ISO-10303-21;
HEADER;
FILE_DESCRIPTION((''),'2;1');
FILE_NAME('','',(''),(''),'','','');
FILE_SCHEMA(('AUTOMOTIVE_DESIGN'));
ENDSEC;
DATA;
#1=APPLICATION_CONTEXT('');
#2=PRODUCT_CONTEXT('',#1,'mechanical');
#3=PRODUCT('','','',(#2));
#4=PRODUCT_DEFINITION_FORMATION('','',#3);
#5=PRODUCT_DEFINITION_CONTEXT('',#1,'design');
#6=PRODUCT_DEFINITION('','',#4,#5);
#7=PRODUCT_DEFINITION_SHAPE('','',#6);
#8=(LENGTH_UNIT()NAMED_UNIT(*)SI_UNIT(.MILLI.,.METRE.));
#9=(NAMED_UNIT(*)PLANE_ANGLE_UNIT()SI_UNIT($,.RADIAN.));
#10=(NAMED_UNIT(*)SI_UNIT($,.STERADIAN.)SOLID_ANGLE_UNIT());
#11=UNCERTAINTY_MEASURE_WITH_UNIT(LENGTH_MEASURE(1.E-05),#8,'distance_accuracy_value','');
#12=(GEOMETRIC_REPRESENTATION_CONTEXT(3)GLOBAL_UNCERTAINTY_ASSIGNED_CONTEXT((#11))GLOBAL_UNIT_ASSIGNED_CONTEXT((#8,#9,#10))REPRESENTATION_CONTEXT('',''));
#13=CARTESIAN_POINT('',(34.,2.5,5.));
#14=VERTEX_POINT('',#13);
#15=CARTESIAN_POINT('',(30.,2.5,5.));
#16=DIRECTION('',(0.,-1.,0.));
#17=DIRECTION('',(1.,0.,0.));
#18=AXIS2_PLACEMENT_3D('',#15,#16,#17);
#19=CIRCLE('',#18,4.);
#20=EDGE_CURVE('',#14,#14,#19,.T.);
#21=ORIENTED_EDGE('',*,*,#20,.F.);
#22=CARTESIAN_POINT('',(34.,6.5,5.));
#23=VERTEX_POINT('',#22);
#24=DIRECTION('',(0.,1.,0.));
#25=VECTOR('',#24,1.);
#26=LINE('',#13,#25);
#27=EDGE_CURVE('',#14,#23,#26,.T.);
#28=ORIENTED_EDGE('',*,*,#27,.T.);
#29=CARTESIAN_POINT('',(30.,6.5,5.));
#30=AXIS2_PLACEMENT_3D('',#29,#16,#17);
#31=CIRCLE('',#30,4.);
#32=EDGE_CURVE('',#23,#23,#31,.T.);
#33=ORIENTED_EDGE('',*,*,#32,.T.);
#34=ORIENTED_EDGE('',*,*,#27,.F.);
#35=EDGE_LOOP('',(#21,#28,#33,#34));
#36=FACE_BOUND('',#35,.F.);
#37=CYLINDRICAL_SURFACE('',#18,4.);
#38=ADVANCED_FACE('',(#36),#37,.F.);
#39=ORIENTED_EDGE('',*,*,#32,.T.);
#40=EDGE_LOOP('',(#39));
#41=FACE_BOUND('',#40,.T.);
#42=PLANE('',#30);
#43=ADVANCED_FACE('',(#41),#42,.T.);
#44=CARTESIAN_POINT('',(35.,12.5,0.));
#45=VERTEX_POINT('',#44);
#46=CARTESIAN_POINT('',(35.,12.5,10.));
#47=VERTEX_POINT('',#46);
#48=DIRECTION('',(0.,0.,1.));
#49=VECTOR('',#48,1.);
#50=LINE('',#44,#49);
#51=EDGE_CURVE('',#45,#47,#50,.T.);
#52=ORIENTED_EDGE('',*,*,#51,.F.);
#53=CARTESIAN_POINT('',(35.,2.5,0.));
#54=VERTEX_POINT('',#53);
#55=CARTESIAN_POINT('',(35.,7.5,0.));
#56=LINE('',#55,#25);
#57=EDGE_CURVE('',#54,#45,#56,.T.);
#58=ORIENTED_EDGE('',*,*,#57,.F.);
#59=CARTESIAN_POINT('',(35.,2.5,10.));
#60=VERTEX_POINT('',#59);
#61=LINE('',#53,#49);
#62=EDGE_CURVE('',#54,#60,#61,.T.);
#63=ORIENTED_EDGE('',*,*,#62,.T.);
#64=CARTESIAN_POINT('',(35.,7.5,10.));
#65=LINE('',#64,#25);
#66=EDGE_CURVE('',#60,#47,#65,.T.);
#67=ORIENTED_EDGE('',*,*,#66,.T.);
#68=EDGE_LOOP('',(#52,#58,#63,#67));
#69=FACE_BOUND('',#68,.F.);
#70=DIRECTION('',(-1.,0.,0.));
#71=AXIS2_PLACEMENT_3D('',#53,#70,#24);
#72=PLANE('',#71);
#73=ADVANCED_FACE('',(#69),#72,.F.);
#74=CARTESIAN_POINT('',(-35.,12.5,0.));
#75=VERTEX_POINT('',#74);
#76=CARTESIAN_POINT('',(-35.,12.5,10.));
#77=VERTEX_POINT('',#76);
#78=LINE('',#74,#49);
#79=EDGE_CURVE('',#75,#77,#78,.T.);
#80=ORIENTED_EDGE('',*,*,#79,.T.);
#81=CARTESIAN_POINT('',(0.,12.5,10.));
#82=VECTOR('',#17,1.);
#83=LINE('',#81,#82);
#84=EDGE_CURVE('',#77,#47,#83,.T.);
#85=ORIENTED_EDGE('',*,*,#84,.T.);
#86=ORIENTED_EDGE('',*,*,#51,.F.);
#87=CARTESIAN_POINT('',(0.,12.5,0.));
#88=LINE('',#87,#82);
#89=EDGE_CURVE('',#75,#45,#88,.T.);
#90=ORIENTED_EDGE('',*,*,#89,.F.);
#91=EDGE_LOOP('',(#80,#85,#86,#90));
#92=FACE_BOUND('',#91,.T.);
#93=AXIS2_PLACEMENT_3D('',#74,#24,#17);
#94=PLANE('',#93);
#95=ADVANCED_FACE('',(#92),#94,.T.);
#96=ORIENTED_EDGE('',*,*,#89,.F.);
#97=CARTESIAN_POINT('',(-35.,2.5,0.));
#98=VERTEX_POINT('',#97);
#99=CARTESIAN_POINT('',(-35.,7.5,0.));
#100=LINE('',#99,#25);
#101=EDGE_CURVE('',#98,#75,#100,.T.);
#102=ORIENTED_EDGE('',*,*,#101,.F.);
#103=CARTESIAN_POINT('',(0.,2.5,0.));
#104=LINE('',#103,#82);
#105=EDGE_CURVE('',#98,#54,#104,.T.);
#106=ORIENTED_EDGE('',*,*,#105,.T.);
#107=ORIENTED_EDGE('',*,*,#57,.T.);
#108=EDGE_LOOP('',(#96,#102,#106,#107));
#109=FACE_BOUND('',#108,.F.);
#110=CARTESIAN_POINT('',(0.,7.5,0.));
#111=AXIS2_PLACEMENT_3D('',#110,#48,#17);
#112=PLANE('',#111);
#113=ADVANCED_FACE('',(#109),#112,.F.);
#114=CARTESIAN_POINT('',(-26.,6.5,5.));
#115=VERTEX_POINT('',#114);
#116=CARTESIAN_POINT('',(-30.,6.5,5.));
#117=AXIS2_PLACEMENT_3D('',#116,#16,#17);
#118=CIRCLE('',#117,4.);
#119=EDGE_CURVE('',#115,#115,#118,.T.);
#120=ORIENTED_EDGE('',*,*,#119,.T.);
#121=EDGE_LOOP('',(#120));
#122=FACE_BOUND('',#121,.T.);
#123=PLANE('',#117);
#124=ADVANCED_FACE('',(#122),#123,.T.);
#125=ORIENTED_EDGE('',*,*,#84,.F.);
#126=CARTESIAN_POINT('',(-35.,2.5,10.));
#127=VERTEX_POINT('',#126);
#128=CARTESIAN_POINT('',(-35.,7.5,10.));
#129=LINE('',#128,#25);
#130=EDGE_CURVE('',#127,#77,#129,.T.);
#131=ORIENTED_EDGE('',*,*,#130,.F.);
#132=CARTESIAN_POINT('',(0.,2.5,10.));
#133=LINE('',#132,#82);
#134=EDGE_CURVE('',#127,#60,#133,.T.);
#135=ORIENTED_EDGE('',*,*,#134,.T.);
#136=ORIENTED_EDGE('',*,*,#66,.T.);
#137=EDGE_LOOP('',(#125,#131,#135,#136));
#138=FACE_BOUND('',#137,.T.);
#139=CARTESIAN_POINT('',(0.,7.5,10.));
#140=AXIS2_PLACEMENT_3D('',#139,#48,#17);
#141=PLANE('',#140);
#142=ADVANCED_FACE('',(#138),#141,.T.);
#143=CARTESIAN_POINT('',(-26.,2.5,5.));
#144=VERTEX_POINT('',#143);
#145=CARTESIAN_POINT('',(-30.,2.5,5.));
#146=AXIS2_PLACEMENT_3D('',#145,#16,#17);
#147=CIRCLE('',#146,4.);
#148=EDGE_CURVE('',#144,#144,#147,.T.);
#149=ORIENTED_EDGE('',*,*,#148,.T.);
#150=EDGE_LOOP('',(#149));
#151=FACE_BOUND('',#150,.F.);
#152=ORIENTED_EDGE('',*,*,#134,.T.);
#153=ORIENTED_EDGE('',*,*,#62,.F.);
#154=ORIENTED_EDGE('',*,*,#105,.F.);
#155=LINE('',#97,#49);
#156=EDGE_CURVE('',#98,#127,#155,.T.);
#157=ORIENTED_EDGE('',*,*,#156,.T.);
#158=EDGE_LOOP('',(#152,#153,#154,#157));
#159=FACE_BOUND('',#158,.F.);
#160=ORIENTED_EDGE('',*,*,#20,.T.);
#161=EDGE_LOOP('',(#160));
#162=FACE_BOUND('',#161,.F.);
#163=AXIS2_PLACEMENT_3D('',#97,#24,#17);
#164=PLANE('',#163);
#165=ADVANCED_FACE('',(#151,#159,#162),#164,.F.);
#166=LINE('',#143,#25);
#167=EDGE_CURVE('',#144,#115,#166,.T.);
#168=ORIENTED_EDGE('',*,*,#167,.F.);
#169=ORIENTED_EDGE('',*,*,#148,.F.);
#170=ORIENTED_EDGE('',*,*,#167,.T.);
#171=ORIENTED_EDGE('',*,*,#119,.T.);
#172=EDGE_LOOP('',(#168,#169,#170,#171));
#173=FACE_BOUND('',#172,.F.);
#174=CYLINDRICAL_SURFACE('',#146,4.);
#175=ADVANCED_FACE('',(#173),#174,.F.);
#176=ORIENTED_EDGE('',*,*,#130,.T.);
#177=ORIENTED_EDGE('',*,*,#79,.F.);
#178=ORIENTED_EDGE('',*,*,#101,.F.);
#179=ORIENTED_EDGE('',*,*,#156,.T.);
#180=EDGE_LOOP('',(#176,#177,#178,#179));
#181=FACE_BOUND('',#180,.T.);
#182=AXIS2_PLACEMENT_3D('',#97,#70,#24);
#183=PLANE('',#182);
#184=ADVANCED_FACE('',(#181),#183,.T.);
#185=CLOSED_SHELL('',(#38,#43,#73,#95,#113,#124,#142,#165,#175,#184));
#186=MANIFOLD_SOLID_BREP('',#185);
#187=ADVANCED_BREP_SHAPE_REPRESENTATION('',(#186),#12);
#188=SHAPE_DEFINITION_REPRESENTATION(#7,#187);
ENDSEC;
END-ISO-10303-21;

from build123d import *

# Parameters (mm, degrees)
F0_W     = 70
F0_H     = 10
F1_DEPTH = 10
F2_R     = 4
F3_DEPTH = 4


with BuildPart() as f1:
    # F0 (on Top) → F1 (new body)
    with BuildSketch(Plane.XY):
        with Locations((0, 7.5)):
            Rectangle(F0_W, F0_H)
    extrude(amount=F1_DEPTH)

    # F2 (on face) → F3 (cut)
    with BuildSketch(Plane.XZ.offset(-2.5)):
        with Locations((30, 5)):
            Circle(F2_R)
        with Locations((-30, 5)):
            Circle(F2_R)
    extrude(amount=-F3_DEPTH, mode=Mode.SUBTRACT)


solid = f1.part
